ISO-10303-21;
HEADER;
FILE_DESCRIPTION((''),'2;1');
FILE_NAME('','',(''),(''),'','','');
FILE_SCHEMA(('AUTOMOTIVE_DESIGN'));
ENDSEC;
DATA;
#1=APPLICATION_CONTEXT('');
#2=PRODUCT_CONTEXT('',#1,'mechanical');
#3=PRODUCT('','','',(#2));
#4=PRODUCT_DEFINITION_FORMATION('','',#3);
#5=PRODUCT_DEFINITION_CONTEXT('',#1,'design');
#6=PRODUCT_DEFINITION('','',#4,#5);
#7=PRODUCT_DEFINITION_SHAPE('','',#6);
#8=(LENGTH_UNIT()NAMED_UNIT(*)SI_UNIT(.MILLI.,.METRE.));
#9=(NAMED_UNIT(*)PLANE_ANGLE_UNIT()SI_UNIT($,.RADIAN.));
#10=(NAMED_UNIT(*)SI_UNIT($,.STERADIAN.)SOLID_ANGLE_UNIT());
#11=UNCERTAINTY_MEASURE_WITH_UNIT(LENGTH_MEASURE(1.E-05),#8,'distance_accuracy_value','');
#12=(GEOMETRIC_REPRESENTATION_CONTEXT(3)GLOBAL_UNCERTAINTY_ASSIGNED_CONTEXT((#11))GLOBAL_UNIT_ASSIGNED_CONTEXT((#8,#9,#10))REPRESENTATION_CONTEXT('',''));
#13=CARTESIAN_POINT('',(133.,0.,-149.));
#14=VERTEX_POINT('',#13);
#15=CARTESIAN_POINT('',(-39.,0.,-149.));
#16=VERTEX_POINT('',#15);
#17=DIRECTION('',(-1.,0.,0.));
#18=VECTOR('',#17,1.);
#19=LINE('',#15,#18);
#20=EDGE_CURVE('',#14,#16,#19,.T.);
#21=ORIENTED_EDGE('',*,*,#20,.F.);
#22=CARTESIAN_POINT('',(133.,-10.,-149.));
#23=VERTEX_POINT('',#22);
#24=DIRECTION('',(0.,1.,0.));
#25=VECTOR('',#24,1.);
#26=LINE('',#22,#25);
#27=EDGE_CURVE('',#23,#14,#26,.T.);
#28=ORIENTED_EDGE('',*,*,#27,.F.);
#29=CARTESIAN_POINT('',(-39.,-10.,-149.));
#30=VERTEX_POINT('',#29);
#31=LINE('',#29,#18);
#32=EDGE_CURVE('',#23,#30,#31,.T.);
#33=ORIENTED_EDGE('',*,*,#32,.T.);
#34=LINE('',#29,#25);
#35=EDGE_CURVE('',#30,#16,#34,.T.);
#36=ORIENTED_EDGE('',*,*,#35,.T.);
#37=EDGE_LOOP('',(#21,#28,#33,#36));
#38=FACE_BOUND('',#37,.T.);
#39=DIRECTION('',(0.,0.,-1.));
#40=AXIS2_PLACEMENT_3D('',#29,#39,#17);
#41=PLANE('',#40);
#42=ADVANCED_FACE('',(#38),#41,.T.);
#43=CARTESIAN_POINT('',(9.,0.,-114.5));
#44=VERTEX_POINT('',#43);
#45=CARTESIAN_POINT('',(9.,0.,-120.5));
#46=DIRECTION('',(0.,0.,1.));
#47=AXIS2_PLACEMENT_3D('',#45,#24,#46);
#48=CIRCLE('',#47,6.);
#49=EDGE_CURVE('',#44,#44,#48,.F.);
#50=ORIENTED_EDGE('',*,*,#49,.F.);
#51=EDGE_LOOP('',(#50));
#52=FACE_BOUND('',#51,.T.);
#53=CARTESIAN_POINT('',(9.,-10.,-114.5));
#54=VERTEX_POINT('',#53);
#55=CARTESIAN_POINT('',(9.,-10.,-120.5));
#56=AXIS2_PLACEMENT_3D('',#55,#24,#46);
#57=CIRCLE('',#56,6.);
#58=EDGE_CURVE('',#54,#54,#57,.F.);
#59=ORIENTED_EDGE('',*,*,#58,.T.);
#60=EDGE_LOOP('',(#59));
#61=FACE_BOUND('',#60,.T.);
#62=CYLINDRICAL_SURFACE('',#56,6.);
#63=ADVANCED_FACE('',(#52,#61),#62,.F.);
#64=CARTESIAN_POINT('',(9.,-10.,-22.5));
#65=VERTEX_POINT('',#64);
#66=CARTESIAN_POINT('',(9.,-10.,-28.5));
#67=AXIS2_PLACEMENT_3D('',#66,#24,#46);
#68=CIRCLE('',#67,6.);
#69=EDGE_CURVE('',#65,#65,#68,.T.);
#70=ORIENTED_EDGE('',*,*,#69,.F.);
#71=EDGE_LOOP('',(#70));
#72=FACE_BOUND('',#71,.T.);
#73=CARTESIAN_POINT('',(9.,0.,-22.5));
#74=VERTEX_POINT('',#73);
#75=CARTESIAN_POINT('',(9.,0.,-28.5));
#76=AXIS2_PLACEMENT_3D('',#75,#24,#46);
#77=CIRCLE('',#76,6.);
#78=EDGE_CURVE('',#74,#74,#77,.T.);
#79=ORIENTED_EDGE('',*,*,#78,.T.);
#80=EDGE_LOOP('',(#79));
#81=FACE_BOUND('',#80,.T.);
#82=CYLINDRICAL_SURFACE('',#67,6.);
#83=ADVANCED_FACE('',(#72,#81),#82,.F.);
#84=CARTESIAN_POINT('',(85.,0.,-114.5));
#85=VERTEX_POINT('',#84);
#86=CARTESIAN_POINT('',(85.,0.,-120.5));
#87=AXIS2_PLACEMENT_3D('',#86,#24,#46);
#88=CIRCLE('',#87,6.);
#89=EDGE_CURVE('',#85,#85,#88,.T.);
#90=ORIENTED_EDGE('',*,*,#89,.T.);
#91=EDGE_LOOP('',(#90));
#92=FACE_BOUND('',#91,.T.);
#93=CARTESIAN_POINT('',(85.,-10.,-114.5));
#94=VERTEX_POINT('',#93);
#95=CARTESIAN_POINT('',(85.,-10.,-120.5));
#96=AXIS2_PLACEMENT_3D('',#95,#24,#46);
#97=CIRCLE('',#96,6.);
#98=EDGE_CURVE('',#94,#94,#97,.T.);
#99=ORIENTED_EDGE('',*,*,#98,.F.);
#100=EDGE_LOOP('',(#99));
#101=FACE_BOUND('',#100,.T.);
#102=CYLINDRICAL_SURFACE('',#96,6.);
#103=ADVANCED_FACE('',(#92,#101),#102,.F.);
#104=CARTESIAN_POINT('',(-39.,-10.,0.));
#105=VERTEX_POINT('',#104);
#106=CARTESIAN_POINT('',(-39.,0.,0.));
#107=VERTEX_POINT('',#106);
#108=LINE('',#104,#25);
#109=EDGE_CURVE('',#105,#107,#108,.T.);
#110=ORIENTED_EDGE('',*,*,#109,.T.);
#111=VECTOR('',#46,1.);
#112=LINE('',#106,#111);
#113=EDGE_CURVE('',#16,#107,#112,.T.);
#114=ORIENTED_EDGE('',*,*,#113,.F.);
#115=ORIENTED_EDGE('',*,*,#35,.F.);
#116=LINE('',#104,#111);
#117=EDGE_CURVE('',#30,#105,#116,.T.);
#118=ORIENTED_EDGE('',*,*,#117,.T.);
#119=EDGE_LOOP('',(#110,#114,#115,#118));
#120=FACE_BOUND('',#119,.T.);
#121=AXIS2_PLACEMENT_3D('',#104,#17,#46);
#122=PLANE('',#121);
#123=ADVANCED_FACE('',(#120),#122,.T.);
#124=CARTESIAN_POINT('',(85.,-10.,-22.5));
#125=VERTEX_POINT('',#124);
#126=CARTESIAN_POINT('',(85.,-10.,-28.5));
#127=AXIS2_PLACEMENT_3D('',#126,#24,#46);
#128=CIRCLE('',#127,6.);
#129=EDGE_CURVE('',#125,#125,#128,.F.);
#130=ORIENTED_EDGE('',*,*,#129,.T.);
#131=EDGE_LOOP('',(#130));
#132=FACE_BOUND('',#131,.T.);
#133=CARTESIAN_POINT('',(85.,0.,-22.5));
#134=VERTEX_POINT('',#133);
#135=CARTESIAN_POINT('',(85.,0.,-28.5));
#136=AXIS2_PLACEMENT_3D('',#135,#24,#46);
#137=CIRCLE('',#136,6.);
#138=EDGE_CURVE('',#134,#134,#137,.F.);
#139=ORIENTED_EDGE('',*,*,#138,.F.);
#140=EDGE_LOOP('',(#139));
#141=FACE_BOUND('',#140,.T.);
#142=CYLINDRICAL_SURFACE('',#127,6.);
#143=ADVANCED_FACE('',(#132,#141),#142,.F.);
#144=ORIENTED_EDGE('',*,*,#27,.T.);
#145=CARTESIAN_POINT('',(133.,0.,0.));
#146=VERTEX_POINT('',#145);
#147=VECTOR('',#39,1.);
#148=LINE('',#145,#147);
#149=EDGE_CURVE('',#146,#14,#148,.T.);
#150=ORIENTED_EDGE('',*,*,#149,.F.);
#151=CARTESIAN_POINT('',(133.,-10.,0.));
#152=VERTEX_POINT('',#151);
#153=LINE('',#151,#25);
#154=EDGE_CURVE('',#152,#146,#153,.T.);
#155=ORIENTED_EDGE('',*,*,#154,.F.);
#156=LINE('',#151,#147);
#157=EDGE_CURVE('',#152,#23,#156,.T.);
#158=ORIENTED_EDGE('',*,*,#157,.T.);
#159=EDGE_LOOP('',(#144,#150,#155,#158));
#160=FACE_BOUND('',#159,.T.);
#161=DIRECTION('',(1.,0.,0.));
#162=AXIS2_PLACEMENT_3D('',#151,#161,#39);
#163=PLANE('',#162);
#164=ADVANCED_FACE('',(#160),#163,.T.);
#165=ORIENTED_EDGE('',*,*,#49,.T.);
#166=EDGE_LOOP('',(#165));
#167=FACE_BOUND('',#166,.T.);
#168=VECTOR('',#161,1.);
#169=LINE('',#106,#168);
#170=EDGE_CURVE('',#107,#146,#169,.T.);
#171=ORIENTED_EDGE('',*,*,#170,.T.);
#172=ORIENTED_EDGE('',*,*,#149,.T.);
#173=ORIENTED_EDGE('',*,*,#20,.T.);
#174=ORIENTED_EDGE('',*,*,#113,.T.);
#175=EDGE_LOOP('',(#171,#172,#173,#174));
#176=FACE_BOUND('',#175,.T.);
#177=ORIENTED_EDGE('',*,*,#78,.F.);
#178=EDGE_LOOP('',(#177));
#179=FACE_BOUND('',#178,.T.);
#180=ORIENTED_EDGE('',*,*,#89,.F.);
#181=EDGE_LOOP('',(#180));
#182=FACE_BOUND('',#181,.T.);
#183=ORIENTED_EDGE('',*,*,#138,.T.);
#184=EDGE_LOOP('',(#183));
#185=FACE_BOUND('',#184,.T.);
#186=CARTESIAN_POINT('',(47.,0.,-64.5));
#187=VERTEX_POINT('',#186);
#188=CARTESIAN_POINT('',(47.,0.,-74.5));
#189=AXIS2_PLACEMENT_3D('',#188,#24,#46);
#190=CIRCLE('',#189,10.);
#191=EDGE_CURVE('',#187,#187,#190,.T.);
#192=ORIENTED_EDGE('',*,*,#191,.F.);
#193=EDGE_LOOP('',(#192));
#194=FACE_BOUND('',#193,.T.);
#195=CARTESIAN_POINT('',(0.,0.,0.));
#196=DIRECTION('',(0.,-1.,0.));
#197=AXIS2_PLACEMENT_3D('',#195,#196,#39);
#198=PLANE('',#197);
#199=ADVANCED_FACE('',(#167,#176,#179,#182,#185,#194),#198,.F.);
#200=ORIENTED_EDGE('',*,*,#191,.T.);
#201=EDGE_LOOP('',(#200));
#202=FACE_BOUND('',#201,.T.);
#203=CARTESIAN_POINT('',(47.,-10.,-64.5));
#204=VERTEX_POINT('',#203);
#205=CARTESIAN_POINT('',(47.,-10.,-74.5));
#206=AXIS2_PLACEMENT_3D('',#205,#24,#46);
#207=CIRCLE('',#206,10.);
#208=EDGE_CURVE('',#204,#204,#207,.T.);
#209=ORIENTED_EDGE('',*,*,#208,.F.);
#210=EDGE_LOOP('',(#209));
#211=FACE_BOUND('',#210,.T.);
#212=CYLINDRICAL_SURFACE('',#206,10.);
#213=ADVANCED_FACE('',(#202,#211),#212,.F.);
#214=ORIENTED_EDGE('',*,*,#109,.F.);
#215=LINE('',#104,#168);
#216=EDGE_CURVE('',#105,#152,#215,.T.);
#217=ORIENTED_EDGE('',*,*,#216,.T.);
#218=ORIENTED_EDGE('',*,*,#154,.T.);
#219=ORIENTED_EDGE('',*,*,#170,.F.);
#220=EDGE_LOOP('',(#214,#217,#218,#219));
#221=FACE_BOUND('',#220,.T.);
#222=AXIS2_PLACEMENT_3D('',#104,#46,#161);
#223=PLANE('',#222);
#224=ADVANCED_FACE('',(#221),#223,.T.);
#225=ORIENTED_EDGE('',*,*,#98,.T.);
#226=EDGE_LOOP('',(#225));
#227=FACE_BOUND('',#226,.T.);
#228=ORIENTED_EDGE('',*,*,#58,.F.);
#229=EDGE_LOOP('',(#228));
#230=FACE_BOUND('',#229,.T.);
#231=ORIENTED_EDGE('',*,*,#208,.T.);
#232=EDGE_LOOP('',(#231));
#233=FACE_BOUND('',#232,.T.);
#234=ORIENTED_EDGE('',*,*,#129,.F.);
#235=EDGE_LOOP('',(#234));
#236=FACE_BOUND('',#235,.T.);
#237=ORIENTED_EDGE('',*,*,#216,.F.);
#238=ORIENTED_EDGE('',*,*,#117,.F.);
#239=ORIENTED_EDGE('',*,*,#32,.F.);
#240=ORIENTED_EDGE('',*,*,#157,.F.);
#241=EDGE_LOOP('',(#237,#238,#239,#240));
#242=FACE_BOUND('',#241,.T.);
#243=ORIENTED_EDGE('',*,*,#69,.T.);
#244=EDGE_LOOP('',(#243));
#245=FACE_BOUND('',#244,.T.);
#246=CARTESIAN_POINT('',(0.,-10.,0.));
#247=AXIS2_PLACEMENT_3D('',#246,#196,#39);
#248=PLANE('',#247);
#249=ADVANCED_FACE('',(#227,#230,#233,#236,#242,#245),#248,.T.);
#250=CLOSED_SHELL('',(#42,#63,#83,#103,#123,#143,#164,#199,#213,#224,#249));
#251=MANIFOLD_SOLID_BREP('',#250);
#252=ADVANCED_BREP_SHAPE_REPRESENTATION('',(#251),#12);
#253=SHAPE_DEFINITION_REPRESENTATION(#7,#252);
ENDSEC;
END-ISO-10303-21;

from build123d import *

# Parameters (mm, degrees)
SKETCH7_W          = 172
SKETCH7_H          = 149
BASE_FLANGE2_DEPTH = 10
SKETCH8_R          = 6
SKETCH8_R_2        = 10
CUT_EXTRUDE1_DEPTH = 200.974998437


# Sheet-metal steps are written as plain solids
with BuildPart() as part:
    # Sketch7 → Base-Flange2 (new body)
    with BuildSketch(Plane(origin=(0, 0, 0), x_dir=(1, 0, 0), z_dir=(0, 1, 0))):
        with Locations((47, 74.5)):
            Rectangle(SKETCH7_W, SKETCH7_H)
    extrude(amount=-BASE_FLANGE2_DEPTH)

    # Sketch8 → Cut-Extrude1 (cut, through all)
    with BuildSketch(Plane(origin=(0, 0, 0), x_dir=(1, 0, 0), z_dir=(0, 1, 0))):
        with Locations(Location((9, 120.5, 0), (0, 0, 270))):
            Circle(SKETCH8_R)
        with Locations(Location((85, 120.5, 0), (0, 0, 270))):
            Circle(SKETCH8_R)
        with Locations(Location((9, 28.5, 0), (0, 0, 270))):
            Circle(SKETCH8_R)
        with Locations(Location((47, 74.5, 0), (0, 0, 270))):
            Circle(SKETCH8_R_2)
        with Locations(Location((85, 28.5, 0), (0, 0, 270))):
            Circle(SKETCH8_R)
    extrude(amount=-CUT_EXTRUDE1_DEPTH, mode=Mode.SUBTRACT)


solid = part.part
